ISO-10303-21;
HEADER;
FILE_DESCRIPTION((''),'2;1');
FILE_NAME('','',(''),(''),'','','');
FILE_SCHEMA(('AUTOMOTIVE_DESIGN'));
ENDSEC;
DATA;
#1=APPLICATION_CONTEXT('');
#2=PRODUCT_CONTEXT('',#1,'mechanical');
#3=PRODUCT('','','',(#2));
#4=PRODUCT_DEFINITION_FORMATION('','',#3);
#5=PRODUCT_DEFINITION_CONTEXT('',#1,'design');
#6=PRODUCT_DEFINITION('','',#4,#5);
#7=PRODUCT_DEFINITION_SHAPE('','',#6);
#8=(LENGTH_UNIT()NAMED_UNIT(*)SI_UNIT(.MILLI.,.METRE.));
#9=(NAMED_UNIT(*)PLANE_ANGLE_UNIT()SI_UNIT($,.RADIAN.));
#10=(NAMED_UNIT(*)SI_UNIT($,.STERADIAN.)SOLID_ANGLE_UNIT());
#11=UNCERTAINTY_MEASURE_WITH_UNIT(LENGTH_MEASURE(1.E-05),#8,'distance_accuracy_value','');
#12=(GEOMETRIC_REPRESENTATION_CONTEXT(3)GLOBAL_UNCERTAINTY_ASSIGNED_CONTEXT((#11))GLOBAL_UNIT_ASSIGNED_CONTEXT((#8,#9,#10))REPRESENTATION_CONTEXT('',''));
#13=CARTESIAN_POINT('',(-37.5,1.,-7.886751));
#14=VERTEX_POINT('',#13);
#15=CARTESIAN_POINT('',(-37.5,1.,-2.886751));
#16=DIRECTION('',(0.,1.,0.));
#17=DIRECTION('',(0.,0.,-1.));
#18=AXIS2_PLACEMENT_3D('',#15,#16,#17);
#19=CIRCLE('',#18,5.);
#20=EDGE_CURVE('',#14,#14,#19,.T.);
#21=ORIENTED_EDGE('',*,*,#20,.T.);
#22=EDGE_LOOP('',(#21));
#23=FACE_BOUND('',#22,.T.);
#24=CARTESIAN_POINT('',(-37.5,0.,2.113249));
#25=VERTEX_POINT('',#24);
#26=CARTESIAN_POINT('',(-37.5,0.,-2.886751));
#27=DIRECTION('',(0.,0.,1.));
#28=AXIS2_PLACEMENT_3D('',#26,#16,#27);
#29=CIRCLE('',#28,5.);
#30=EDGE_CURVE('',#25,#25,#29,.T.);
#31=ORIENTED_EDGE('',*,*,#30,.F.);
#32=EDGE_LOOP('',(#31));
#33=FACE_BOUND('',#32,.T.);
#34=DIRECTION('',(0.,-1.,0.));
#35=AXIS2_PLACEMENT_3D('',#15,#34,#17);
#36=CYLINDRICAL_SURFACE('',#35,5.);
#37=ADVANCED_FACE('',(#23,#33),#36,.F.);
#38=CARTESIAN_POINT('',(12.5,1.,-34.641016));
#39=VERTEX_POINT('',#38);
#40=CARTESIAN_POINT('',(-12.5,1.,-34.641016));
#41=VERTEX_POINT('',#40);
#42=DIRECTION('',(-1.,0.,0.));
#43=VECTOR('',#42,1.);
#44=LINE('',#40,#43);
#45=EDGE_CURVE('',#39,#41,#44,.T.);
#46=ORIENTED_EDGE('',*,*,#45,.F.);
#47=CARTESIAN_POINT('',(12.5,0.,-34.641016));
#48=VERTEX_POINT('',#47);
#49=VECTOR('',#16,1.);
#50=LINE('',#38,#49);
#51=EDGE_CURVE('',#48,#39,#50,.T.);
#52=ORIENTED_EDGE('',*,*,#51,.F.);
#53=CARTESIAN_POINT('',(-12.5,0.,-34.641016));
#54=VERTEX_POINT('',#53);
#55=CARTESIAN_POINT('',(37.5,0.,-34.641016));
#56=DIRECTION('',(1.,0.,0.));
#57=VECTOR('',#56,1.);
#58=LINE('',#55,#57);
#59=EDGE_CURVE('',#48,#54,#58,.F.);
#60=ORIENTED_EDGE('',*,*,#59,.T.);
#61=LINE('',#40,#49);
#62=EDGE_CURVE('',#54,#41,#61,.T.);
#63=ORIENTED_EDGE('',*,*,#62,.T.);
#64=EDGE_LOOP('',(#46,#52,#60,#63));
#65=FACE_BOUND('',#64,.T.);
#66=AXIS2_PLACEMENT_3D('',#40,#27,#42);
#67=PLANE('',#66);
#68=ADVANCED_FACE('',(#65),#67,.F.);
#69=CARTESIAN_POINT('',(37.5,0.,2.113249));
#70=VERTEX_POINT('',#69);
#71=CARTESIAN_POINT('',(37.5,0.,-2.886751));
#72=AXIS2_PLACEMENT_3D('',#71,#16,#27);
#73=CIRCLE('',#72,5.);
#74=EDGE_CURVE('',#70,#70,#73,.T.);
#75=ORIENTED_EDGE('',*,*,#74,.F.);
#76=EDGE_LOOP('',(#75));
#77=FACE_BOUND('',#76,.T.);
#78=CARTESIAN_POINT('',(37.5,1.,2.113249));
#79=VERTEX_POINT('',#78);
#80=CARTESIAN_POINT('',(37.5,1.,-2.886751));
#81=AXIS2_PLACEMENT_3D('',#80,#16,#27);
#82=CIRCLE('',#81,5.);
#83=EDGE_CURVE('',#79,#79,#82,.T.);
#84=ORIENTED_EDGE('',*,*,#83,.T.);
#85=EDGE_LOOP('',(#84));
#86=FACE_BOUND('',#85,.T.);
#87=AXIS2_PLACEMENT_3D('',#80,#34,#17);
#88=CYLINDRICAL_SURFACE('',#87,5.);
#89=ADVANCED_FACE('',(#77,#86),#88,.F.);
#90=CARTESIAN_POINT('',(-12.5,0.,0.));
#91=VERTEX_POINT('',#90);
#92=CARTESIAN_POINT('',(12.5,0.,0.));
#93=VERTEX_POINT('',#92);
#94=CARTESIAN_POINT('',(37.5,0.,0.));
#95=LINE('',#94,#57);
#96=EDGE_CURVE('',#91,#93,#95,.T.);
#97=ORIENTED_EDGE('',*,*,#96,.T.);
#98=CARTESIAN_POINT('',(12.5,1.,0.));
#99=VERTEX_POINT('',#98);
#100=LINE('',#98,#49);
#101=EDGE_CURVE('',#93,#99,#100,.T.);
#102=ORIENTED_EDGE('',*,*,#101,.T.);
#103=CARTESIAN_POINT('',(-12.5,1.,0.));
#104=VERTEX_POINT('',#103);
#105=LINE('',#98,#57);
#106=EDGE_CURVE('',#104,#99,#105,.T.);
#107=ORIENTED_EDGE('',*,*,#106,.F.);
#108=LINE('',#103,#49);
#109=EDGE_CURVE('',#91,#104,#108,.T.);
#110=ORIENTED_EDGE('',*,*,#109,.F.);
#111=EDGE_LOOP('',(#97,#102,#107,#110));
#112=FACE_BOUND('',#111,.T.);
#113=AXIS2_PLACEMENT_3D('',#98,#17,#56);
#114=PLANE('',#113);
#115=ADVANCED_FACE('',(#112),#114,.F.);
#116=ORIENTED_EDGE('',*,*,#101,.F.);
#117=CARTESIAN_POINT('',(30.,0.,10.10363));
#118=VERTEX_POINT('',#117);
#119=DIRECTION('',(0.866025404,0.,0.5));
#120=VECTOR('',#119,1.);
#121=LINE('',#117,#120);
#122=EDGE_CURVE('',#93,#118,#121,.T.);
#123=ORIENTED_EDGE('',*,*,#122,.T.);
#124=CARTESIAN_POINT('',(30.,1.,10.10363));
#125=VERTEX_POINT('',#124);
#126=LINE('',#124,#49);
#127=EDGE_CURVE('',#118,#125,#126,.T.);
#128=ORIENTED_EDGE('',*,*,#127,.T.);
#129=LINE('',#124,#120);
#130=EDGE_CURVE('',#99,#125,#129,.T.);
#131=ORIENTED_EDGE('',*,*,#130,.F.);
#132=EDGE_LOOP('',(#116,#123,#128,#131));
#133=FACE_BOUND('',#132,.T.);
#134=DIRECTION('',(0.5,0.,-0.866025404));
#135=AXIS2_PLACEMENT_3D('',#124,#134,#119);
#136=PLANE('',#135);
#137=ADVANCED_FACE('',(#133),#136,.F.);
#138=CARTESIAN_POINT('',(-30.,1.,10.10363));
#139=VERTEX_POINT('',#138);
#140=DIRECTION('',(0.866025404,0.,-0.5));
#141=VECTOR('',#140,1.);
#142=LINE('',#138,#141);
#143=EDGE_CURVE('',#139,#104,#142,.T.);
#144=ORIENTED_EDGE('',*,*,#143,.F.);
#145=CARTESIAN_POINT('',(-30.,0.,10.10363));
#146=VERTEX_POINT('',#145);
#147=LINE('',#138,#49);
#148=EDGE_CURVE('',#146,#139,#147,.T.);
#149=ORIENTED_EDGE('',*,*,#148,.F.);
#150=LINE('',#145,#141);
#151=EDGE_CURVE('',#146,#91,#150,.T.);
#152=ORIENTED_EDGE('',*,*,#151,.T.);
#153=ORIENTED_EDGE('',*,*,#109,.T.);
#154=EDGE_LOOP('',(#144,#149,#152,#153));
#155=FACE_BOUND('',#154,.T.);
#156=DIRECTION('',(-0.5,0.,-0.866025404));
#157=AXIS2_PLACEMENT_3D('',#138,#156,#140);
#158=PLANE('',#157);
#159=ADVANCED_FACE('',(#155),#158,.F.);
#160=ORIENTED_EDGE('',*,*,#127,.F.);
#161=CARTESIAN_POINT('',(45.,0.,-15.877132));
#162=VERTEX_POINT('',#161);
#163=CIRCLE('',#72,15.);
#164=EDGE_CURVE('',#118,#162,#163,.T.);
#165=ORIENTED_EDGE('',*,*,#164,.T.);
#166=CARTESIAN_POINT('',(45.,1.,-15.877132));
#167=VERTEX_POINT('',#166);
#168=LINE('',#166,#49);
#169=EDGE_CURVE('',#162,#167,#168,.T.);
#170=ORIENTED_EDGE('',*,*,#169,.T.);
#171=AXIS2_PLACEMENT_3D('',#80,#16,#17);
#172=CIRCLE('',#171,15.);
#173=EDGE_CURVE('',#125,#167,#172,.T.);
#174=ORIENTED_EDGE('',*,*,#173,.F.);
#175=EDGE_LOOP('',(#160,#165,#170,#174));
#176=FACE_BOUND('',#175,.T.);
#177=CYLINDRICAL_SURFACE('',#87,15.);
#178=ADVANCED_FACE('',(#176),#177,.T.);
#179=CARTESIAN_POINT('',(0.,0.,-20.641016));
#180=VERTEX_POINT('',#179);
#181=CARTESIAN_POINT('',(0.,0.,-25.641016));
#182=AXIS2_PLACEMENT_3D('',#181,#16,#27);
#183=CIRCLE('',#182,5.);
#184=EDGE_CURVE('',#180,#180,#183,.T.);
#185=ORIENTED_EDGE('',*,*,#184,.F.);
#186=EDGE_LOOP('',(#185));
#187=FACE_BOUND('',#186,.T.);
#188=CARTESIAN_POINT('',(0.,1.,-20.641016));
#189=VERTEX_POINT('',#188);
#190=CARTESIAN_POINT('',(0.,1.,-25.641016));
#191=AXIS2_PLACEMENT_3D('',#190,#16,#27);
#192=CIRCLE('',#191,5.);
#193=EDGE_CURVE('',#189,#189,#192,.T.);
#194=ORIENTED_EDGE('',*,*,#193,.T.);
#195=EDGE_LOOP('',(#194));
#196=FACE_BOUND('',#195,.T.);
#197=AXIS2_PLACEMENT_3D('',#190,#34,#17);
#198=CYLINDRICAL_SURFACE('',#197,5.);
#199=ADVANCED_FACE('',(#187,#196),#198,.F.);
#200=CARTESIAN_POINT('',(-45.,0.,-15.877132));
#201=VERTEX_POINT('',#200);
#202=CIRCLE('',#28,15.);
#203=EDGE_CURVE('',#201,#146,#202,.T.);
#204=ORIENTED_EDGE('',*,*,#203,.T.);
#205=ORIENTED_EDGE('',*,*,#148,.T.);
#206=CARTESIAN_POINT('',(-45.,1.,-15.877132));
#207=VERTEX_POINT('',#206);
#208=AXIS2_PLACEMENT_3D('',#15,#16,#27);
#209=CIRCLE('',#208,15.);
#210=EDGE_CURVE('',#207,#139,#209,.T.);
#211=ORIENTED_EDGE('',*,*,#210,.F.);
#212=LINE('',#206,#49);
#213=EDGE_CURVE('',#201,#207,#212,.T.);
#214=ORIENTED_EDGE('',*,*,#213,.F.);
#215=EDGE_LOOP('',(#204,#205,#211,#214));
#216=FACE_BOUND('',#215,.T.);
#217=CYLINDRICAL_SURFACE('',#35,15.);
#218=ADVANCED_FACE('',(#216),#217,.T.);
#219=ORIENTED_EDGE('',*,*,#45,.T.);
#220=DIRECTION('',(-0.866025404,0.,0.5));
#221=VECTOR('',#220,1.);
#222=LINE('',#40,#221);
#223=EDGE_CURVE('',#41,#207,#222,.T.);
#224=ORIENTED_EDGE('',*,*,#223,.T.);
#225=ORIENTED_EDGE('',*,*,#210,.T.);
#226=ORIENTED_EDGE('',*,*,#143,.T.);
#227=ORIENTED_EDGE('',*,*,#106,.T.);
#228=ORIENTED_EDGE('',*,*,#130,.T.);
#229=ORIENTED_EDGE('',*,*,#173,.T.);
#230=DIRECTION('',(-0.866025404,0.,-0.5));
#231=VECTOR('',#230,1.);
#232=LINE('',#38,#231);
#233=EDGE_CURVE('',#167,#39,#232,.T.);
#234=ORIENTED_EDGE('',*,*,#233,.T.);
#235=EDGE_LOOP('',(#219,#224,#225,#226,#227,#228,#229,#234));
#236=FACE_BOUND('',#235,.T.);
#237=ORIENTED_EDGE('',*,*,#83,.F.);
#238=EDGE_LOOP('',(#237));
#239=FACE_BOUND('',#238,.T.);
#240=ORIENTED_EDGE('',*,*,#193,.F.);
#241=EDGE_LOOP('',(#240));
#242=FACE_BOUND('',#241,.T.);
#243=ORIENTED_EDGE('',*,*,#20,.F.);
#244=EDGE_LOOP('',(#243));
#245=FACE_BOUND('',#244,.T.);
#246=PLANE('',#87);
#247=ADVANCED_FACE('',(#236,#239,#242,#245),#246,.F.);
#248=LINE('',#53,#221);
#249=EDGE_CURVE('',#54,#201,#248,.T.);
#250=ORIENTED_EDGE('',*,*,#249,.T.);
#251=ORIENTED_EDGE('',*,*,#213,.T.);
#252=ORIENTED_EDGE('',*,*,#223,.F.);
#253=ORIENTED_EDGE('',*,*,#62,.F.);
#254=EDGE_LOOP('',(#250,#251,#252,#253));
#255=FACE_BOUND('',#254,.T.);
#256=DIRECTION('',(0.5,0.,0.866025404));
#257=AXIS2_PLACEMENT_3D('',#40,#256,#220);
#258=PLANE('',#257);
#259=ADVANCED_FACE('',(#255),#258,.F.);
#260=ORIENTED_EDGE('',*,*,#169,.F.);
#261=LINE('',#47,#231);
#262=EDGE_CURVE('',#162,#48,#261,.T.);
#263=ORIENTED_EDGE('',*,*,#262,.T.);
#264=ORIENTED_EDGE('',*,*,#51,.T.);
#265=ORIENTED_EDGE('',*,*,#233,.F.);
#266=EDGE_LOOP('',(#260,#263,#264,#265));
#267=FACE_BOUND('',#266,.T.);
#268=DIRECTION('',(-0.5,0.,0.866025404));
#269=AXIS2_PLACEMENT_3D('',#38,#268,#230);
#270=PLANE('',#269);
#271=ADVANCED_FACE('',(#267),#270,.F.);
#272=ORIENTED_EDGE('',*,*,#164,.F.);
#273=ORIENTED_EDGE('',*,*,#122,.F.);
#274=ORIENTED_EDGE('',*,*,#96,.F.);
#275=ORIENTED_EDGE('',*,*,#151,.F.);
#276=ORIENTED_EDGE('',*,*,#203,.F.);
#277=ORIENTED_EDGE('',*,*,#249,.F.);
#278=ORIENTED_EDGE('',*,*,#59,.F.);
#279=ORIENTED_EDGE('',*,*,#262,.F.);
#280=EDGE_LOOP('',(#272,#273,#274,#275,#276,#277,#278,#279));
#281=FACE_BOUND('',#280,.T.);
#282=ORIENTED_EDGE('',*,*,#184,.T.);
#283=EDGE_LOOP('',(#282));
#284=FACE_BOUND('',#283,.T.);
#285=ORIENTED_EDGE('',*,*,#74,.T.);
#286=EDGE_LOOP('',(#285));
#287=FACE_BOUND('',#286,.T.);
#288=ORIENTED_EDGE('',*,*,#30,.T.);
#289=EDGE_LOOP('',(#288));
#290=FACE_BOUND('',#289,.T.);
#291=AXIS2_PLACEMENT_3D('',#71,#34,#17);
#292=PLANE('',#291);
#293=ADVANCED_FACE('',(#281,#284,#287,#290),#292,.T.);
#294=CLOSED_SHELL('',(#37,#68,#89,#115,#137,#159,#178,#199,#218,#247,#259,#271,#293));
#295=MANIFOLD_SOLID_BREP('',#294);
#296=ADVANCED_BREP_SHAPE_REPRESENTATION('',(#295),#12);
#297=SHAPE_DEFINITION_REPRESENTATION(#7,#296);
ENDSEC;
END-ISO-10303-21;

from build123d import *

# Parameters (mm, degrees)
SZKIC1_R                    = 5
DODANIE_WYCI_GNI_CIE1_DEPTH = 1


with BuildPart() as part:
    # Szkic1 → Dodanie-wyciągnięcie1 (new body)
    with BuildSketch(Plane(origin=(0, 0, 0), x_dir=(1, 0, 0), z_dir=(0, 1, 0))):
        with BuildLine():
            Line((-12.5, 34.641016151), (12.5, 34.641016151))
            Line((12.5, 34.641016151), (45, 15.877132403))
            ThreePointArc((45, 15.877132403), (50.490381057, -4.613248654), (30, -10.103629711))
            Line((30, -10.103629711), (12.5, 0))
            Line((12.5, 0), (-12.5, 0))
            Line((-12.5, 0), (-30, -10.103629711))
            ThreePointArc((-30, -10.103629711), (-50.490381057, -4.613248654), (-45, 15.877132403))
            Line((-45, 15.877132403), (-12.5, 34.641016151))
        make_face()
        with Locations(Location((37.5, 2.886751346, 0), (0, 0, 270))):
            Circle(SZKIC1_R, mode=Mode.SUBTRACT)
        with Locations(Location((-37.5, 2.886751346, 0), (0, 0, 90))):
            Circle(SZKIC1_R, mode=Mode.SUBTRACT)
        with Locations(Location((0, 25.641016151, 0), (0, 0, 270))):
            Circle(SZKIC1_R, mode=Mode.SUBTRACT)
    extrude(amount=DODANIE_WYCI_GNI_CIE1_DEPTH)


solid = part.part
